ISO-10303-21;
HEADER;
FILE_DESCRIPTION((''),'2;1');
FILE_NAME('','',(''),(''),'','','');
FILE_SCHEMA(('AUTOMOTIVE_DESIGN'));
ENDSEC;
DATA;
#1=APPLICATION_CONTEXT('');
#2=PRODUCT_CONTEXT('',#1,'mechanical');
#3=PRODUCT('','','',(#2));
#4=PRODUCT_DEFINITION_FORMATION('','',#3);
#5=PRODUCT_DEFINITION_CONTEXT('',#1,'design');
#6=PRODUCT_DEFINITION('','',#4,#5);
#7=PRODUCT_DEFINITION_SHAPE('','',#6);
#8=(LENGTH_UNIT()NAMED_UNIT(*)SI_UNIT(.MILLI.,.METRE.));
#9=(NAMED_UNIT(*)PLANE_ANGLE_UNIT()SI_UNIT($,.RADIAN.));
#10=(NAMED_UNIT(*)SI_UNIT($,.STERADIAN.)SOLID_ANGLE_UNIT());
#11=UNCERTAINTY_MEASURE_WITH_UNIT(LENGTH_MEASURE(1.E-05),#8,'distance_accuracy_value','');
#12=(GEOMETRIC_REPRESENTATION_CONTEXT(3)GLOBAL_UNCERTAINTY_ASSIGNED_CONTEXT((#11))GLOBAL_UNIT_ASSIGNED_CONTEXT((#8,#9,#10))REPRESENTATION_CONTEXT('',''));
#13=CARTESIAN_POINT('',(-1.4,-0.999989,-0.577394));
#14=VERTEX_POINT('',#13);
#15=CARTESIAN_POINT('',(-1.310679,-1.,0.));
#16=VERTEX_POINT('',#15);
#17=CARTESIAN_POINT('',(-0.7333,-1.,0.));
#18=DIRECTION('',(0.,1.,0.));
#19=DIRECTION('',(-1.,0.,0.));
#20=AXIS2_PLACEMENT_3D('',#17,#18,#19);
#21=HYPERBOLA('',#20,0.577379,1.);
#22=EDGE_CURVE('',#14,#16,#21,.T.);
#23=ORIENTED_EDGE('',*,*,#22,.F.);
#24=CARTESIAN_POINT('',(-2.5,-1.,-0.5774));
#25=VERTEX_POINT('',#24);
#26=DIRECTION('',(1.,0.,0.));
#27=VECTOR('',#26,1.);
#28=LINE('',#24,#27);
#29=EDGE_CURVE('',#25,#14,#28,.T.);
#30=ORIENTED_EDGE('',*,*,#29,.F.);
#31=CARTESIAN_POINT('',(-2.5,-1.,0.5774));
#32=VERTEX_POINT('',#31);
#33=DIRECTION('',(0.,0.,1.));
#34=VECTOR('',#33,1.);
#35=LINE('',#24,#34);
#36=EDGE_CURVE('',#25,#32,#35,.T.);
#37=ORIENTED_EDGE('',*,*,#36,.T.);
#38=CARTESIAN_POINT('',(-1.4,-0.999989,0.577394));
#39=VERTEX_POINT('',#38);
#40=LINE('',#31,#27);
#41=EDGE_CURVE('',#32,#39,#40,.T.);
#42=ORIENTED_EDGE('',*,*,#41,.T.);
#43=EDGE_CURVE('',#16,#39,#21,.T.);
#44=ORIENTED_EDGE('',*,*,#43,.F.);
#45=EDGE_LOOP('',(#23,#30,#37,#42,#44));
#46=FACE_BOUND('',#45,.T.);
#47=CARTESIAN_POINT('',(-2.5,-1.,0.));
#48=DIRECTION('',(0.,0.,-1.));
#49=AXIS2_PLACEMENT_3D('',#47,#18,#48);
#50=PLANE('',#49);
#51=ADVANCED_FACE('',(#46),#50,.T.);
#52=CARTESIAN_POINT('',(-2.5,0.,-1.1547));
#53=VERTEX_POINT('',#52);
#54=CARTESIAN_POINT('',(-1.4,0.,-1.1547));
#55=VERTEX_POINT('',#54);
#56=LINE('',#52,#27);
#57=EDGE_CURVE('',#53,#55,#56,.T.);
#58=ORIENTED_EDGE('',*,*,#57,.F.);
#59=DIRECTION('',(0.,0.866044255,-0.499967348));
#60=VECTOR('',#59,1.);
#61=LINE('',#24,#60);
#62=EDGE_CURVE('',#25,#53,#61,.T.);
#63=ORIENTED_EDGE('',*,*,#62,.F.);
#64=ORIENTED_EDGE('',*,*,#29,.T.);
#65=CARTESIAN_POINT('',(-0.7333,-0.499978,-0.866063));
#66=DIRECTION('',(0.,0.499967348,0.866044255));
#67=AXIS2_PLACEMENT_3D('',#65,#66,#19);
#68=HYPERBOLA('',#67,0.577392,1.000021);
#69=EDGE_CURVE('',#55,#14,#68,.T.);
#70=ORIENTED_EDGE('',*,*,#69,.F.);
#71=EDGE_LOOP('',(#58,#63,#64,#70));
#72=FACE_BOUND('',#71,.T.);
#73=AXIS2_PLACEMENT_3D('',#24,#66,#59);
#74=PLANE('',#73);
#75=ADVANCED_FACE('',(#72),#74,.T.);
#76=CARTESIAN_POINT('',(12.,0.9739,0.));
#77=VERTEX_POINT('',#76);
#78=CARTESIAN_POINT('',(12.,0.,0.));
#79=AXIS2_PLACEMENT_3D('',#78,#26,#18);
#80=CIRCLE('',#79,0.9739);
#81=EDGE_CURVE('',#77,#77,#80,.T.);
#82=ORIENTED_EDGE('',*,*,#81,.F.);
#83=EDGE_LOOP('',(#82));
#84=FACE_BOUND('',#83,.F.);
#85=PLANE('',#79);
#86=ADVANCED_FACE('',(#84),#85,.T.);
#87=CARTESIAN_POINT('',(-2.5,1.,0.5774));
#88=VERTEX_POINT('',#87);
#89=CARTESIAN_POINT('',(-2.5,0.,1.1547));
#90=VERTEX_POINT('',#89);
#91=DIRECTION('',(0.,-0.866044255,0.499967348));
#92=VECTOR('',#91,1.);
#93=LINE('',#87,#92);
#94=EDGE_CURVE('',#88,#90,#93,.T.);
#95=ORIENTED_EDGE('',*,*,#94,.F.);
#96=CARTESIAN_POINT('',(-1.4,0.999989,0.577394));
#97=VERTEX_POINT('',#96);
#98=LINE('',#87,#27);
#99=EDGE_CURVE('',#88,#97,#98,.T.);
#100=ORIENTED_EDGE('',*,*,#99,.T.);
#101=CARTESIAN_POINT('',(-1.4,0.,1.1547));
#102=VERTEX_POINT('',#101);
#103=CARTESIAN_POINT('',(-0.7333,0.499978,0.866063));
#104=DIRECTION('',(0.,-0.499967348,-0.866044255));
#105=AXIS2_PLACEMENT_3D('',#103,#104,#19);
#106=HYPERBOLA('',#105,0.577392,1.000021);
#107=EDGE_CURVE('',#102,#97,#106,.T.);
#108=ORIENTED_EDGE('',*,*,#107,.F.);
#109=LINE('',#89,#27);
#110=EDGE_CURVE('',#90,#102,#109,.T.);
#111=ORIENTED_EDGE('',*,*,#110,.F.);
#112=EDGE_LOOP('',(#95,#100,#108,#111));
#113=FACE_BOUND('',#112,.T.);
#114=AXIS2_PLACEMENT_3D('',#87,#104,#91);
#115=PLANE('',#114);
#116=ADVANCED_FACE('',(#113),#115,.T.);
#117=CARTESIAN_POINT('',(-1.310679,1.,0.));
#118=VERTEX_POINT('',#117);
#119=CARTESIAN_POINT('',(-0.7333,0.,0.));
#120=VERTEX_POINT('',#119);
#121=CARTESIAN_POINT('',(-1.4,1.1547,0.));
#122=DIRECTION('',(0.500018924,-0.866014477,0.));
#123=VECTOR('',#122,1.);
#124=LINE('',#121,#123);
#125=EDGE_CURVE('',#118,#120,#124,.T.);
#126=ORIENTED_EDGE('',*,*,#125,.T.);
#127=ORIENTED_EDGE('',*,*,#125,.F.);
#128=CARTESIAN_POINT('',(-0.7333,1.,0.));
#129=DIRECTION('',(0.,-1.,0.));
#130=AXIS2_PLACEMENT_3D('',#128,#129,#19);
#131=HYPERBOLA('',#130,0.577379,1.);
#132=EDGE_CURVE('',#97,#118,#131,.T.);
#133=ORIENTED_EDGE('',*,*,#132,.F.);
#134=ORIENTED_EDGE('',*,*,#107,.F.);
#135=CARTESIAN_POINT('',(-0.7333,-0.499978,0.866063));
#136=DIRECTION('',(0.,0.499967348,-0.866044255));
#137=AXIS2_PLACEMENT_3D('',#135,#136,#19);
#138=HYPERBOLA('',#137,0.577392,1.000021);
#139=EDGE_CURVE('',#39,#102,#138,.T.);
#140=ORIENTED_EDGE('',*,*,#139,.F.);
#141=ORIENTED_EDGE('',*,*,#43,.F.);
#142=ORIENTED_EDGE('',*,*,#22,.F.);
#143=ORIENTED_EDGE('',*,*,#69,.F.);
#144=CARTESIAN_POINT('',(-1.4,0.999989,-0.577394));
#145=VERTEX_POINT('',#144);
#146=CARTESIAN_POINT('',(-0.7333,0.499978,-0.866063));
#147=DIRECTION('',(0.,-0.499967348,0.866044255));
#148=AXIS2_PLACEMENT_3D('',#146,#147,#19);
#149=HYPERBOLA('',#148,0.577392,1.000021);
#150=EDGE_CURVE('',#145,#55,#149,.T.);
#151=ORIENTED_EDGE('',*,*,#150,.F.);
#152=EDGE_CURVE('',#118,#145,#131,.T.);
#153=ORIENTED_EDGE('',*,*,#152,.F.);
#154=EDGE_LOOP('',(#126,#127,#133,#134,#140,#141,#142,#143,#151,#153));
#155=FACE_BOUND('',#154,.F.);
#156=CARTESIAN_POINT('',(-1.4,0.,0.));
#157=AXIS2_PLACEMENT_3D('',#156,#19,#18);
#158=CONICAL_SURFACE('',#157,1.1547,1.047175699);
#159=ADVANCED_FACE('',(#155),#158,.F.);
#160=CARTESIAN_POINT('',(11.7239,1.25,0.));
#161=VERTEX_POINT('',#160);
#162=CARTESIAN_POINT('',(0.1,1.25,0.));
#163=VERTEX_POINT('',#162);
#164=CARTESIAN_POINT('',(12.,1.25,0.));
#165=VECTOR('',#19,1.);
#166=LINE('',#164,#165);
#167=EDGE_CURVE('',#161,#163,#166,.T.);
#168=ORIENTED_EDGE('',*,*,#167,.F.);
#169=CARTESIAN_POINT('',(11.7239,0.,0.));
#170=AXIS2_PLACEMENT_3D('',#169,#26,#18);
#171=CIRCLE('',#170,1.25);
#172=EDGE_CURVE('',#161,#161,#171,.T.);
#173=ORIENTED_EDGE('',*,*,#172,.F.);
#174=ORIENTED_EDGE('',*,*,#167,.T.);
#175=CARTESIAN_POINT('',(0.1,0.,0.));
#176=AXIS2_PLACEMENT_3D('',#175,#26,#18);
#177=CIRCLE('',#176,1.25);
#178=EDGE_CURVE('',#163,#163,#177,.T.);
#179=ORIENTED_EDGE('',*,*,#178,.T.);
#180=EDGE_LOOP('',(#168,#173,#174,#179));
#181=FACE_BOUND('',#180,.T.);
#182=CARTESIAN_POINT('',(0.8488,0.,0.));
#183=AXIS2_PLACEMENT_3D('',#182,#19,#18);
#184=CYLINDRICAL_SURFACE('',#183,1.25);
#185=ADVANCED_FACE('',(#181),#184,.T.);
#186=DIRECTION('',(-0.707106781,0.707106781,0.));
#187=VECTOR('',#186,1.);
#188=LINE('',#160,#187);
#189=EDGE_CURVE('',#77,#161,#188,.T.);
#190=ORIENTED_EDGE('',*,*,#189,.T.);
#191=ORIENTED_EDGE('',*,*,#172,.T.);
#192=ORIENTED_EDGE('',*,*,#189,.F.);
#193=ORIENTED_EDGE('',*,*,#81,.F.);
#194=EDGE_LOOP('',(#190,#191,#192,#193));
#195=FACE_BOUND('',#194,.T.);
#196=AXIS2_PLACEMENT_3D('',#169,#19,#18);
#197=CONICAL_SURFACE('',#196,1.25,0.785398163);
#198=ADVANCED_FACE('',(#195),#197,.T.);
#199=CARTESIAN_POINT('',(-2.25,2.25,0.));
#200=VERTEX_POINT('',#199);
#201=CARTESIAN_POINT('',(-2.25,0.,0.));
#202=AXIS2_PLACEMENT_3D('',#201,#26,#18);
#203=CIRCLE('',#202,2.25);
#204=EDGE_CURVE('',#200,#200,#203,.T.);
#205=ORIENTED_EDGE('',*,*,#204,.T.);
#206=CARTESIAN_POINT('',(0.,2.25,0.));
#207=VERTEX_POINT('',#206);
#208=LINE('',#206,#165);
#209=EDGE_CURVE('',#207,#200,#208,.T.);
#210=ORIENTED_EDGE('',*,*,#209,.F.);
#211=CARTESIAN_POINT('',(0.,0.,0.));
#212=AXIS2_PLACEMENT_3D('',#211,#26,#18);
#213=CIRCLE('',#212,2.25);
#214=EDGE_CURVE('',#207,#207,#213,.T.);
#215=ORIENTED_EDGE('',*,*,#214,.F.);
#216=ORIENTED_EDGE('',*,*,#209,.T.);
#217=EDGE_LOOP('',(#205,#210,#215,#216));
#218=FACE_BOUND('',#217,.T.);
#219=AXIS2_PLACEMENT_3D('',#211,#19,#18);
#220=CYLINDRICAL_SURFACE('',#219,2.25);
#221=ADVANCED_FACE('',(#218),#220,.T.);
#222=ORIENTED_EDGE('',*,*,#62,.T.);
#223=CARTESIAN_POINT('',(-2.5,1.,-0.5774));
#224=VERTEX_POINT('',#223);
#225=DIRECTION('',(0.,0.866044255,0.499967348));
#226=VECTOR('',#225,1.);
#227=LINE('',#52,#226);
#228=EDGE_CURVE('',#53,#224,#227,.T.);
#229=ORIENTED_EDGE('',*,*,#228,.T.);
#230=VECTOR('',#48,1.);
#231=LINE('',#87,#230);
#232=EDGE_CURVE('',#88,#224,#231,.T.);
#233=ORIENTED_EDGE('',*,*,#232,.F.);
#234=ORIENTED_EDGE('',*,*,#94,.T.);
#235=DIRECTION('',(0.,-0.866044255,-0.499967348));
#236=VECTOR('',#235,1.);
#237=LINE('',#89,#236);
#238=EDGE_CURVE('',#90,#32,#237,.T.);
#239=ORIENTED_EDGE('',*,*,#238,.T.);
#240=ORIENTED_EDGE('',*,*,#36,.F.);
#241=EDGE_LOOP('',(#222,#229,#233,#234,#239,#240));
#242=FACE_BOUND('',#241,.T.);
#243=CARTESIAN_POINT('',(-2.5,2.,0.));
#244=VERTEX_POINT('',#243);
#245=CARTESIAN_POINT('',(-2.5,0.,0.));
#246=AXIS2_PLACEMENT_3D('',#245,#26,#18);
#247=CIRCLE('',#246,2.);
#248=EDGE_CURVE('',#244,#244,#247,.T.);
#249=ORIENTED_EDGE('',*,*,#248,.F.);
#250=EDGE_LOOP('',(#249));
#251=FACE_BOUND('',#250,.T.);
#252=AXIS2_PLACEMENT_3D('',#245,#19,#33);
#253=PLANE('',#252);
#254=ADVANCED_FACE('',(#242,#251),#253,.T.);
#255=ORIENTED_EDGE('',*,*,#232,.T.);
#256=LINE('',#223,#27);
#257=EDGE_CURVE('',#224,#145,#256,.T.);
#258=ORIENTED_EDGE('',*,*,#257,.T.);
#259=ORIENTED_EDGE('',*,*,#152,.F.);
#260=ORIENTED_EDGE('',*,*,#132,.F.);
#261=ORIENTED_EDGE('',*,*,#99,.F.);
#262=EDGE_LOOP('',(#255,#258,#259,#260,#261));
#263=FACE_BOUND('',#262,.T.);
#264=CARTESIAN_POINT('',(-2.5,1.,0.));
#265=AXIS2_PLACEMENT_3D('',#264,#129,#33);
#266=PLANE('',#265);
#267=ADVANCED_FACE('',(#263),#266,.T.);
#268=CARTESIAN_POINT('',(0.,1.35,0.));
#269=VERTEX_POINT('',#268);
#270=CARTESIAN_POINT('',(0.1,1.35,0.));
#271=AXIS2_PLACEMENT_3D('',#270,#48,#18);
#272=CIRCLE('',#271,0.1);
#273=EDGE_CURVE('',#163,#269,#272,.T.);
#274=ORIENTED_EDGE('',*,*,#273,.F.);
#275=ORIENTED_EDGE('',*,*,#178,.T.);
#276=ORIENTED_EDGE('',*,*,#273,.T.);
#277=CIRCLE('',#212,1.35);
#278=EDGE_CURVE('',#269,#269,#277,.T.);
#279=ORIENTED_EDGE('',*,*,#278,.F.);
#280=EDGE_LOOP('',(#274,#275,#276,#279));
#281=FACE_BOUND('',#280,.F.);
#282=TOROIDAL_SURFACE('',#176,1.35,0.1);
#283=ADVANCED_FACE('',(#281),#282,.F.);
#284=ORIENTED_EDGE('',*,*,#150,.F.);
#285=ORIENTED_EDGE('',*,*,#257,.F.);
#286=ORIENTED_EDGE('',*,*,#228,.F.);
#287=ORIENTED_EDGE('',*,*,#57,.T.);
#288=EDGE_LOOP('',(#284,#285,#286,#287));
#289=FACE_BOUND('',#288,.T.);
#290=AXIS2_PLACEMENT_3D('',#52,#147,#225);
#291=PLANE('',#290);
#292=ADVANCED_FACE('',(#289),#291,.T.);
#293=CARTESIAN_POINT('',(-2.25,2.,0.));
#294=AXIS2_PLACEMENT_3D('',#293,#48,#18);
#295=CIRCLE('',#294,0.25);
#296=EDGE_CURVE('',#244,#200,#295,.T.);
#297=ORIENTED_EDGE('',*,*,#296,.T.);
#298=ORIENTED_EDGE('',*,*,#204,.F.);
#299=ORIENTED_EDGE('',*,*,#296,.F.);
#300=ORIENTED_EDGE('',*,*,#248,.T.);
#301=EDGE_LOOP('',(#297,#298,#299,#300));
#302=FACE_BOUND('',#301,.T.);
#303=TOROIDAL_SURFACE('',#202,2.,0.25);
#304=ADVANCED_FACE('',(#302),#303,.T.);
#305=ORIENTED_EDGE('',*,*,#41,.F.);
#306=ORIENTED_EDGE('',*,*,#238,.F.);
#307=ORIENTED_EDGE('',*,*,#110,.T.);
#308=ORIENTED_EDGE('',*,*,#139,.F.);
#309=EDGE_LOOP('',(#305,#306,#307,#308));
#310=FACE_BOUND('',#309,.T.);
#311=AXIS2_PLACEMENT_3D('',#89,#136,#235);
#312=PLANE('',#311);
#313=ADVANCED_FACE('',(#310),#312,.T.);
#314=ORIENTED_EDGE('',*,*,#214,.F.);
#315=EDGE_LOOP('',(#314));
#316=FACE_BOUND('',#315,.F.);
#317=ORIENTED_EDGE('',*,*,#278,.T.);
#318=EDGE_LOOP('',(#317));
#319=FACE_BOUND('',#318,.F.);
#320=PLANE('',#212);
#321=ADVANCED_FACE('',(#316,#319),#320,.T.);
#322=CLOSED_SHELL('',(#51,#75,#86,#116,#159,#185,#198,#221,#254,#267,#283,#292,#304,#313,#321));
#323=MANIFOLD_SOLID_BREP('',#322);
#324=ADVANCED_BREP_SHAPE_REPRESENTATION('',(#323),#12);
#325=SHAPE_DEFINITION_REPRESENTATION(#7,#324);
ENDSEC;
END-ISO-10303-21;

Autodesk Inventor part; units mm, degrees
ref_plane "YZ Plane" through (0, 0, 0) normal (1, 0, 0) x (0, 1, 0)
ref_plane "XZ Plane" through (0, 0, 0) normal (0, 1, 0) x (-1, 0, 0)
sketch "Sketch1" plane through (0, 0, 0) normal (0, 0, 1) x (1, 0, 0)
  line L0 (-0.7333, 0) -> (12, 0)
  line L1 (12, 0) -> (12, 1.25)
  line L2 (12, 1.25) -> (1.125, 1.25)
  line L3 (1.125, 1.25) -> (0.8488, 1.25)
  line L4 (0.8488, 1.25) -> (0, 1.25)
  line L5 (0, 1.25) -> (0, 2.25)
  line L6 (0, 2.25) -> (-2.5, 2.25)
  line L7 (-2.5, 2.25) -> (-2.5, 1.1547)
  line L8 (-2.5, 1.1547) -> (-1.4, 1.1547)
  line L9 (-1.4, 1.1547) -> (-0.7333, 0)
  line L10 (-5.4, 0) -> (14.9, 0) projected
  line L11 (0, -0.45) -> (0, 2.7) projected
  line L12 (1.125, 1.25) -> (0, 1.25) construction
  dimension "d1" = 10.875
  dimension "d2" = 0.2762
  dimension "d3" = 2.5
  dimension "d4" = 1.1
  dimension "d5" = 60
  dimension "d6" = 2.5
  dimension "d7" = 2.5
  dimension "d8" = 2.3094
  dimension "d9" = 4.5
  dimension "d26" = 12
revolve "Body" add sketch "Sketch1" angle 360 about axis through (-0.7333, 0, 0) along (1, 0, 0)
sketch "Sketch2" plane through (-2.5, 0, 0) normal (-1, 0, 0) x (0, 0, 1)
  circle A0 centre (0, 0) radius 1.1547 projected
  line L0 (0, -3.15) -> (0, 3.15) projected
  line L1 (-3.15, 0) -> (3.15, 0) projected
  line L2 (1.1547, 0) -> (0.5774, -1)
  line L3 (0.5774, -1) -> (-0.5774, -1)
  line L4 (-0.5774, -1) -> (-1.1547, 0)
  line L5 (-1.1547, 0) -> (-0.5774, 1)
  line L6 (-0.5774, 1) -> (0.5774, 1)
  line L7 (0.5774, 1) -> (1.1547, 0)
extrude "Slot" add sketch "Sketch2" against normal up to next contours L7 A0 | A0 L2 | L6 L0 A0 | A0 L0 L3 | L0 L6 A0 | A0 L3 L0 | L4 A0 | A0 L5
fillet "Fillet1" radius 0.25 1 edges at (-2.5, -2.25, 0)
thread "Thread" size "M2.5x0.45" class "6g" standard "ISO Metric profile" length 10.875
chamfer "Chamfer1" distance 0.2761 distance2 0.2761 1 edges at (12, -1.25, 0) measured on face at (12, -0.2714, -0.6096)
ref_plane "Work Plane1" through (29, 0, 0) normal (0, -1, 0) x (1, 0, 0)
fillet "Fillet2" radius 0.1 1 edges at (0, -1.25, 0)
equation "\"d1\" = GEL"
equation "\"d3\" = KOH"
equation "\"d4\" = INTI"
equation "\"d6\" = GD"
equation "\"d7\" = BDM"
equation "\"d8\" = 1.1547 * SW"
equation "\"d9\" = KOD"
equation "\"d26\" = NLG"
equation "\"d30\" = R"
equation "\"d17\" = RR"
equation "\"d13\" = GEL"
equation "\"d15\" = -0.5 * SPD + 0.5 * GD"
equation "\"d16\" = GUL"
equation "\"GD\" = NND"
equation "\"NLG\" = 12"
equation "\"GEL\" = 10.875"
equation "\"KOD\" = 4.5"
equation "\"KOH\" = NND"
equation "\"INTI\" = 1.1"
equation "\"GAL\" = 0.61345 * PTC"
equation "\"GUL\" = 0.61345 * PTC"
equation "\"BDM\" = NND"
equation "\"SW\" = 2"
equation "\"RR\" = 0.1 * NND"
equation "\"SPD\" = NND - 1.2269 * PTC"
equation "\"R\" = 0.1"
equation "\"TOA\" = 30deg"
equation "\"GD1\" = THREADDIA - 1.2269 * PTC"
equation "\"THREADDIA\" = NND"
equation "\"FAWI\" = 45deg"
equation "\"PTC\" = 0.45"
equation "\"NND\" = 2.5"
equation "\"E0\" = 1.155 * SW"
properties part number "BS EN ISO 4762 - M2.5 x 12" material "Steel, Mild"
